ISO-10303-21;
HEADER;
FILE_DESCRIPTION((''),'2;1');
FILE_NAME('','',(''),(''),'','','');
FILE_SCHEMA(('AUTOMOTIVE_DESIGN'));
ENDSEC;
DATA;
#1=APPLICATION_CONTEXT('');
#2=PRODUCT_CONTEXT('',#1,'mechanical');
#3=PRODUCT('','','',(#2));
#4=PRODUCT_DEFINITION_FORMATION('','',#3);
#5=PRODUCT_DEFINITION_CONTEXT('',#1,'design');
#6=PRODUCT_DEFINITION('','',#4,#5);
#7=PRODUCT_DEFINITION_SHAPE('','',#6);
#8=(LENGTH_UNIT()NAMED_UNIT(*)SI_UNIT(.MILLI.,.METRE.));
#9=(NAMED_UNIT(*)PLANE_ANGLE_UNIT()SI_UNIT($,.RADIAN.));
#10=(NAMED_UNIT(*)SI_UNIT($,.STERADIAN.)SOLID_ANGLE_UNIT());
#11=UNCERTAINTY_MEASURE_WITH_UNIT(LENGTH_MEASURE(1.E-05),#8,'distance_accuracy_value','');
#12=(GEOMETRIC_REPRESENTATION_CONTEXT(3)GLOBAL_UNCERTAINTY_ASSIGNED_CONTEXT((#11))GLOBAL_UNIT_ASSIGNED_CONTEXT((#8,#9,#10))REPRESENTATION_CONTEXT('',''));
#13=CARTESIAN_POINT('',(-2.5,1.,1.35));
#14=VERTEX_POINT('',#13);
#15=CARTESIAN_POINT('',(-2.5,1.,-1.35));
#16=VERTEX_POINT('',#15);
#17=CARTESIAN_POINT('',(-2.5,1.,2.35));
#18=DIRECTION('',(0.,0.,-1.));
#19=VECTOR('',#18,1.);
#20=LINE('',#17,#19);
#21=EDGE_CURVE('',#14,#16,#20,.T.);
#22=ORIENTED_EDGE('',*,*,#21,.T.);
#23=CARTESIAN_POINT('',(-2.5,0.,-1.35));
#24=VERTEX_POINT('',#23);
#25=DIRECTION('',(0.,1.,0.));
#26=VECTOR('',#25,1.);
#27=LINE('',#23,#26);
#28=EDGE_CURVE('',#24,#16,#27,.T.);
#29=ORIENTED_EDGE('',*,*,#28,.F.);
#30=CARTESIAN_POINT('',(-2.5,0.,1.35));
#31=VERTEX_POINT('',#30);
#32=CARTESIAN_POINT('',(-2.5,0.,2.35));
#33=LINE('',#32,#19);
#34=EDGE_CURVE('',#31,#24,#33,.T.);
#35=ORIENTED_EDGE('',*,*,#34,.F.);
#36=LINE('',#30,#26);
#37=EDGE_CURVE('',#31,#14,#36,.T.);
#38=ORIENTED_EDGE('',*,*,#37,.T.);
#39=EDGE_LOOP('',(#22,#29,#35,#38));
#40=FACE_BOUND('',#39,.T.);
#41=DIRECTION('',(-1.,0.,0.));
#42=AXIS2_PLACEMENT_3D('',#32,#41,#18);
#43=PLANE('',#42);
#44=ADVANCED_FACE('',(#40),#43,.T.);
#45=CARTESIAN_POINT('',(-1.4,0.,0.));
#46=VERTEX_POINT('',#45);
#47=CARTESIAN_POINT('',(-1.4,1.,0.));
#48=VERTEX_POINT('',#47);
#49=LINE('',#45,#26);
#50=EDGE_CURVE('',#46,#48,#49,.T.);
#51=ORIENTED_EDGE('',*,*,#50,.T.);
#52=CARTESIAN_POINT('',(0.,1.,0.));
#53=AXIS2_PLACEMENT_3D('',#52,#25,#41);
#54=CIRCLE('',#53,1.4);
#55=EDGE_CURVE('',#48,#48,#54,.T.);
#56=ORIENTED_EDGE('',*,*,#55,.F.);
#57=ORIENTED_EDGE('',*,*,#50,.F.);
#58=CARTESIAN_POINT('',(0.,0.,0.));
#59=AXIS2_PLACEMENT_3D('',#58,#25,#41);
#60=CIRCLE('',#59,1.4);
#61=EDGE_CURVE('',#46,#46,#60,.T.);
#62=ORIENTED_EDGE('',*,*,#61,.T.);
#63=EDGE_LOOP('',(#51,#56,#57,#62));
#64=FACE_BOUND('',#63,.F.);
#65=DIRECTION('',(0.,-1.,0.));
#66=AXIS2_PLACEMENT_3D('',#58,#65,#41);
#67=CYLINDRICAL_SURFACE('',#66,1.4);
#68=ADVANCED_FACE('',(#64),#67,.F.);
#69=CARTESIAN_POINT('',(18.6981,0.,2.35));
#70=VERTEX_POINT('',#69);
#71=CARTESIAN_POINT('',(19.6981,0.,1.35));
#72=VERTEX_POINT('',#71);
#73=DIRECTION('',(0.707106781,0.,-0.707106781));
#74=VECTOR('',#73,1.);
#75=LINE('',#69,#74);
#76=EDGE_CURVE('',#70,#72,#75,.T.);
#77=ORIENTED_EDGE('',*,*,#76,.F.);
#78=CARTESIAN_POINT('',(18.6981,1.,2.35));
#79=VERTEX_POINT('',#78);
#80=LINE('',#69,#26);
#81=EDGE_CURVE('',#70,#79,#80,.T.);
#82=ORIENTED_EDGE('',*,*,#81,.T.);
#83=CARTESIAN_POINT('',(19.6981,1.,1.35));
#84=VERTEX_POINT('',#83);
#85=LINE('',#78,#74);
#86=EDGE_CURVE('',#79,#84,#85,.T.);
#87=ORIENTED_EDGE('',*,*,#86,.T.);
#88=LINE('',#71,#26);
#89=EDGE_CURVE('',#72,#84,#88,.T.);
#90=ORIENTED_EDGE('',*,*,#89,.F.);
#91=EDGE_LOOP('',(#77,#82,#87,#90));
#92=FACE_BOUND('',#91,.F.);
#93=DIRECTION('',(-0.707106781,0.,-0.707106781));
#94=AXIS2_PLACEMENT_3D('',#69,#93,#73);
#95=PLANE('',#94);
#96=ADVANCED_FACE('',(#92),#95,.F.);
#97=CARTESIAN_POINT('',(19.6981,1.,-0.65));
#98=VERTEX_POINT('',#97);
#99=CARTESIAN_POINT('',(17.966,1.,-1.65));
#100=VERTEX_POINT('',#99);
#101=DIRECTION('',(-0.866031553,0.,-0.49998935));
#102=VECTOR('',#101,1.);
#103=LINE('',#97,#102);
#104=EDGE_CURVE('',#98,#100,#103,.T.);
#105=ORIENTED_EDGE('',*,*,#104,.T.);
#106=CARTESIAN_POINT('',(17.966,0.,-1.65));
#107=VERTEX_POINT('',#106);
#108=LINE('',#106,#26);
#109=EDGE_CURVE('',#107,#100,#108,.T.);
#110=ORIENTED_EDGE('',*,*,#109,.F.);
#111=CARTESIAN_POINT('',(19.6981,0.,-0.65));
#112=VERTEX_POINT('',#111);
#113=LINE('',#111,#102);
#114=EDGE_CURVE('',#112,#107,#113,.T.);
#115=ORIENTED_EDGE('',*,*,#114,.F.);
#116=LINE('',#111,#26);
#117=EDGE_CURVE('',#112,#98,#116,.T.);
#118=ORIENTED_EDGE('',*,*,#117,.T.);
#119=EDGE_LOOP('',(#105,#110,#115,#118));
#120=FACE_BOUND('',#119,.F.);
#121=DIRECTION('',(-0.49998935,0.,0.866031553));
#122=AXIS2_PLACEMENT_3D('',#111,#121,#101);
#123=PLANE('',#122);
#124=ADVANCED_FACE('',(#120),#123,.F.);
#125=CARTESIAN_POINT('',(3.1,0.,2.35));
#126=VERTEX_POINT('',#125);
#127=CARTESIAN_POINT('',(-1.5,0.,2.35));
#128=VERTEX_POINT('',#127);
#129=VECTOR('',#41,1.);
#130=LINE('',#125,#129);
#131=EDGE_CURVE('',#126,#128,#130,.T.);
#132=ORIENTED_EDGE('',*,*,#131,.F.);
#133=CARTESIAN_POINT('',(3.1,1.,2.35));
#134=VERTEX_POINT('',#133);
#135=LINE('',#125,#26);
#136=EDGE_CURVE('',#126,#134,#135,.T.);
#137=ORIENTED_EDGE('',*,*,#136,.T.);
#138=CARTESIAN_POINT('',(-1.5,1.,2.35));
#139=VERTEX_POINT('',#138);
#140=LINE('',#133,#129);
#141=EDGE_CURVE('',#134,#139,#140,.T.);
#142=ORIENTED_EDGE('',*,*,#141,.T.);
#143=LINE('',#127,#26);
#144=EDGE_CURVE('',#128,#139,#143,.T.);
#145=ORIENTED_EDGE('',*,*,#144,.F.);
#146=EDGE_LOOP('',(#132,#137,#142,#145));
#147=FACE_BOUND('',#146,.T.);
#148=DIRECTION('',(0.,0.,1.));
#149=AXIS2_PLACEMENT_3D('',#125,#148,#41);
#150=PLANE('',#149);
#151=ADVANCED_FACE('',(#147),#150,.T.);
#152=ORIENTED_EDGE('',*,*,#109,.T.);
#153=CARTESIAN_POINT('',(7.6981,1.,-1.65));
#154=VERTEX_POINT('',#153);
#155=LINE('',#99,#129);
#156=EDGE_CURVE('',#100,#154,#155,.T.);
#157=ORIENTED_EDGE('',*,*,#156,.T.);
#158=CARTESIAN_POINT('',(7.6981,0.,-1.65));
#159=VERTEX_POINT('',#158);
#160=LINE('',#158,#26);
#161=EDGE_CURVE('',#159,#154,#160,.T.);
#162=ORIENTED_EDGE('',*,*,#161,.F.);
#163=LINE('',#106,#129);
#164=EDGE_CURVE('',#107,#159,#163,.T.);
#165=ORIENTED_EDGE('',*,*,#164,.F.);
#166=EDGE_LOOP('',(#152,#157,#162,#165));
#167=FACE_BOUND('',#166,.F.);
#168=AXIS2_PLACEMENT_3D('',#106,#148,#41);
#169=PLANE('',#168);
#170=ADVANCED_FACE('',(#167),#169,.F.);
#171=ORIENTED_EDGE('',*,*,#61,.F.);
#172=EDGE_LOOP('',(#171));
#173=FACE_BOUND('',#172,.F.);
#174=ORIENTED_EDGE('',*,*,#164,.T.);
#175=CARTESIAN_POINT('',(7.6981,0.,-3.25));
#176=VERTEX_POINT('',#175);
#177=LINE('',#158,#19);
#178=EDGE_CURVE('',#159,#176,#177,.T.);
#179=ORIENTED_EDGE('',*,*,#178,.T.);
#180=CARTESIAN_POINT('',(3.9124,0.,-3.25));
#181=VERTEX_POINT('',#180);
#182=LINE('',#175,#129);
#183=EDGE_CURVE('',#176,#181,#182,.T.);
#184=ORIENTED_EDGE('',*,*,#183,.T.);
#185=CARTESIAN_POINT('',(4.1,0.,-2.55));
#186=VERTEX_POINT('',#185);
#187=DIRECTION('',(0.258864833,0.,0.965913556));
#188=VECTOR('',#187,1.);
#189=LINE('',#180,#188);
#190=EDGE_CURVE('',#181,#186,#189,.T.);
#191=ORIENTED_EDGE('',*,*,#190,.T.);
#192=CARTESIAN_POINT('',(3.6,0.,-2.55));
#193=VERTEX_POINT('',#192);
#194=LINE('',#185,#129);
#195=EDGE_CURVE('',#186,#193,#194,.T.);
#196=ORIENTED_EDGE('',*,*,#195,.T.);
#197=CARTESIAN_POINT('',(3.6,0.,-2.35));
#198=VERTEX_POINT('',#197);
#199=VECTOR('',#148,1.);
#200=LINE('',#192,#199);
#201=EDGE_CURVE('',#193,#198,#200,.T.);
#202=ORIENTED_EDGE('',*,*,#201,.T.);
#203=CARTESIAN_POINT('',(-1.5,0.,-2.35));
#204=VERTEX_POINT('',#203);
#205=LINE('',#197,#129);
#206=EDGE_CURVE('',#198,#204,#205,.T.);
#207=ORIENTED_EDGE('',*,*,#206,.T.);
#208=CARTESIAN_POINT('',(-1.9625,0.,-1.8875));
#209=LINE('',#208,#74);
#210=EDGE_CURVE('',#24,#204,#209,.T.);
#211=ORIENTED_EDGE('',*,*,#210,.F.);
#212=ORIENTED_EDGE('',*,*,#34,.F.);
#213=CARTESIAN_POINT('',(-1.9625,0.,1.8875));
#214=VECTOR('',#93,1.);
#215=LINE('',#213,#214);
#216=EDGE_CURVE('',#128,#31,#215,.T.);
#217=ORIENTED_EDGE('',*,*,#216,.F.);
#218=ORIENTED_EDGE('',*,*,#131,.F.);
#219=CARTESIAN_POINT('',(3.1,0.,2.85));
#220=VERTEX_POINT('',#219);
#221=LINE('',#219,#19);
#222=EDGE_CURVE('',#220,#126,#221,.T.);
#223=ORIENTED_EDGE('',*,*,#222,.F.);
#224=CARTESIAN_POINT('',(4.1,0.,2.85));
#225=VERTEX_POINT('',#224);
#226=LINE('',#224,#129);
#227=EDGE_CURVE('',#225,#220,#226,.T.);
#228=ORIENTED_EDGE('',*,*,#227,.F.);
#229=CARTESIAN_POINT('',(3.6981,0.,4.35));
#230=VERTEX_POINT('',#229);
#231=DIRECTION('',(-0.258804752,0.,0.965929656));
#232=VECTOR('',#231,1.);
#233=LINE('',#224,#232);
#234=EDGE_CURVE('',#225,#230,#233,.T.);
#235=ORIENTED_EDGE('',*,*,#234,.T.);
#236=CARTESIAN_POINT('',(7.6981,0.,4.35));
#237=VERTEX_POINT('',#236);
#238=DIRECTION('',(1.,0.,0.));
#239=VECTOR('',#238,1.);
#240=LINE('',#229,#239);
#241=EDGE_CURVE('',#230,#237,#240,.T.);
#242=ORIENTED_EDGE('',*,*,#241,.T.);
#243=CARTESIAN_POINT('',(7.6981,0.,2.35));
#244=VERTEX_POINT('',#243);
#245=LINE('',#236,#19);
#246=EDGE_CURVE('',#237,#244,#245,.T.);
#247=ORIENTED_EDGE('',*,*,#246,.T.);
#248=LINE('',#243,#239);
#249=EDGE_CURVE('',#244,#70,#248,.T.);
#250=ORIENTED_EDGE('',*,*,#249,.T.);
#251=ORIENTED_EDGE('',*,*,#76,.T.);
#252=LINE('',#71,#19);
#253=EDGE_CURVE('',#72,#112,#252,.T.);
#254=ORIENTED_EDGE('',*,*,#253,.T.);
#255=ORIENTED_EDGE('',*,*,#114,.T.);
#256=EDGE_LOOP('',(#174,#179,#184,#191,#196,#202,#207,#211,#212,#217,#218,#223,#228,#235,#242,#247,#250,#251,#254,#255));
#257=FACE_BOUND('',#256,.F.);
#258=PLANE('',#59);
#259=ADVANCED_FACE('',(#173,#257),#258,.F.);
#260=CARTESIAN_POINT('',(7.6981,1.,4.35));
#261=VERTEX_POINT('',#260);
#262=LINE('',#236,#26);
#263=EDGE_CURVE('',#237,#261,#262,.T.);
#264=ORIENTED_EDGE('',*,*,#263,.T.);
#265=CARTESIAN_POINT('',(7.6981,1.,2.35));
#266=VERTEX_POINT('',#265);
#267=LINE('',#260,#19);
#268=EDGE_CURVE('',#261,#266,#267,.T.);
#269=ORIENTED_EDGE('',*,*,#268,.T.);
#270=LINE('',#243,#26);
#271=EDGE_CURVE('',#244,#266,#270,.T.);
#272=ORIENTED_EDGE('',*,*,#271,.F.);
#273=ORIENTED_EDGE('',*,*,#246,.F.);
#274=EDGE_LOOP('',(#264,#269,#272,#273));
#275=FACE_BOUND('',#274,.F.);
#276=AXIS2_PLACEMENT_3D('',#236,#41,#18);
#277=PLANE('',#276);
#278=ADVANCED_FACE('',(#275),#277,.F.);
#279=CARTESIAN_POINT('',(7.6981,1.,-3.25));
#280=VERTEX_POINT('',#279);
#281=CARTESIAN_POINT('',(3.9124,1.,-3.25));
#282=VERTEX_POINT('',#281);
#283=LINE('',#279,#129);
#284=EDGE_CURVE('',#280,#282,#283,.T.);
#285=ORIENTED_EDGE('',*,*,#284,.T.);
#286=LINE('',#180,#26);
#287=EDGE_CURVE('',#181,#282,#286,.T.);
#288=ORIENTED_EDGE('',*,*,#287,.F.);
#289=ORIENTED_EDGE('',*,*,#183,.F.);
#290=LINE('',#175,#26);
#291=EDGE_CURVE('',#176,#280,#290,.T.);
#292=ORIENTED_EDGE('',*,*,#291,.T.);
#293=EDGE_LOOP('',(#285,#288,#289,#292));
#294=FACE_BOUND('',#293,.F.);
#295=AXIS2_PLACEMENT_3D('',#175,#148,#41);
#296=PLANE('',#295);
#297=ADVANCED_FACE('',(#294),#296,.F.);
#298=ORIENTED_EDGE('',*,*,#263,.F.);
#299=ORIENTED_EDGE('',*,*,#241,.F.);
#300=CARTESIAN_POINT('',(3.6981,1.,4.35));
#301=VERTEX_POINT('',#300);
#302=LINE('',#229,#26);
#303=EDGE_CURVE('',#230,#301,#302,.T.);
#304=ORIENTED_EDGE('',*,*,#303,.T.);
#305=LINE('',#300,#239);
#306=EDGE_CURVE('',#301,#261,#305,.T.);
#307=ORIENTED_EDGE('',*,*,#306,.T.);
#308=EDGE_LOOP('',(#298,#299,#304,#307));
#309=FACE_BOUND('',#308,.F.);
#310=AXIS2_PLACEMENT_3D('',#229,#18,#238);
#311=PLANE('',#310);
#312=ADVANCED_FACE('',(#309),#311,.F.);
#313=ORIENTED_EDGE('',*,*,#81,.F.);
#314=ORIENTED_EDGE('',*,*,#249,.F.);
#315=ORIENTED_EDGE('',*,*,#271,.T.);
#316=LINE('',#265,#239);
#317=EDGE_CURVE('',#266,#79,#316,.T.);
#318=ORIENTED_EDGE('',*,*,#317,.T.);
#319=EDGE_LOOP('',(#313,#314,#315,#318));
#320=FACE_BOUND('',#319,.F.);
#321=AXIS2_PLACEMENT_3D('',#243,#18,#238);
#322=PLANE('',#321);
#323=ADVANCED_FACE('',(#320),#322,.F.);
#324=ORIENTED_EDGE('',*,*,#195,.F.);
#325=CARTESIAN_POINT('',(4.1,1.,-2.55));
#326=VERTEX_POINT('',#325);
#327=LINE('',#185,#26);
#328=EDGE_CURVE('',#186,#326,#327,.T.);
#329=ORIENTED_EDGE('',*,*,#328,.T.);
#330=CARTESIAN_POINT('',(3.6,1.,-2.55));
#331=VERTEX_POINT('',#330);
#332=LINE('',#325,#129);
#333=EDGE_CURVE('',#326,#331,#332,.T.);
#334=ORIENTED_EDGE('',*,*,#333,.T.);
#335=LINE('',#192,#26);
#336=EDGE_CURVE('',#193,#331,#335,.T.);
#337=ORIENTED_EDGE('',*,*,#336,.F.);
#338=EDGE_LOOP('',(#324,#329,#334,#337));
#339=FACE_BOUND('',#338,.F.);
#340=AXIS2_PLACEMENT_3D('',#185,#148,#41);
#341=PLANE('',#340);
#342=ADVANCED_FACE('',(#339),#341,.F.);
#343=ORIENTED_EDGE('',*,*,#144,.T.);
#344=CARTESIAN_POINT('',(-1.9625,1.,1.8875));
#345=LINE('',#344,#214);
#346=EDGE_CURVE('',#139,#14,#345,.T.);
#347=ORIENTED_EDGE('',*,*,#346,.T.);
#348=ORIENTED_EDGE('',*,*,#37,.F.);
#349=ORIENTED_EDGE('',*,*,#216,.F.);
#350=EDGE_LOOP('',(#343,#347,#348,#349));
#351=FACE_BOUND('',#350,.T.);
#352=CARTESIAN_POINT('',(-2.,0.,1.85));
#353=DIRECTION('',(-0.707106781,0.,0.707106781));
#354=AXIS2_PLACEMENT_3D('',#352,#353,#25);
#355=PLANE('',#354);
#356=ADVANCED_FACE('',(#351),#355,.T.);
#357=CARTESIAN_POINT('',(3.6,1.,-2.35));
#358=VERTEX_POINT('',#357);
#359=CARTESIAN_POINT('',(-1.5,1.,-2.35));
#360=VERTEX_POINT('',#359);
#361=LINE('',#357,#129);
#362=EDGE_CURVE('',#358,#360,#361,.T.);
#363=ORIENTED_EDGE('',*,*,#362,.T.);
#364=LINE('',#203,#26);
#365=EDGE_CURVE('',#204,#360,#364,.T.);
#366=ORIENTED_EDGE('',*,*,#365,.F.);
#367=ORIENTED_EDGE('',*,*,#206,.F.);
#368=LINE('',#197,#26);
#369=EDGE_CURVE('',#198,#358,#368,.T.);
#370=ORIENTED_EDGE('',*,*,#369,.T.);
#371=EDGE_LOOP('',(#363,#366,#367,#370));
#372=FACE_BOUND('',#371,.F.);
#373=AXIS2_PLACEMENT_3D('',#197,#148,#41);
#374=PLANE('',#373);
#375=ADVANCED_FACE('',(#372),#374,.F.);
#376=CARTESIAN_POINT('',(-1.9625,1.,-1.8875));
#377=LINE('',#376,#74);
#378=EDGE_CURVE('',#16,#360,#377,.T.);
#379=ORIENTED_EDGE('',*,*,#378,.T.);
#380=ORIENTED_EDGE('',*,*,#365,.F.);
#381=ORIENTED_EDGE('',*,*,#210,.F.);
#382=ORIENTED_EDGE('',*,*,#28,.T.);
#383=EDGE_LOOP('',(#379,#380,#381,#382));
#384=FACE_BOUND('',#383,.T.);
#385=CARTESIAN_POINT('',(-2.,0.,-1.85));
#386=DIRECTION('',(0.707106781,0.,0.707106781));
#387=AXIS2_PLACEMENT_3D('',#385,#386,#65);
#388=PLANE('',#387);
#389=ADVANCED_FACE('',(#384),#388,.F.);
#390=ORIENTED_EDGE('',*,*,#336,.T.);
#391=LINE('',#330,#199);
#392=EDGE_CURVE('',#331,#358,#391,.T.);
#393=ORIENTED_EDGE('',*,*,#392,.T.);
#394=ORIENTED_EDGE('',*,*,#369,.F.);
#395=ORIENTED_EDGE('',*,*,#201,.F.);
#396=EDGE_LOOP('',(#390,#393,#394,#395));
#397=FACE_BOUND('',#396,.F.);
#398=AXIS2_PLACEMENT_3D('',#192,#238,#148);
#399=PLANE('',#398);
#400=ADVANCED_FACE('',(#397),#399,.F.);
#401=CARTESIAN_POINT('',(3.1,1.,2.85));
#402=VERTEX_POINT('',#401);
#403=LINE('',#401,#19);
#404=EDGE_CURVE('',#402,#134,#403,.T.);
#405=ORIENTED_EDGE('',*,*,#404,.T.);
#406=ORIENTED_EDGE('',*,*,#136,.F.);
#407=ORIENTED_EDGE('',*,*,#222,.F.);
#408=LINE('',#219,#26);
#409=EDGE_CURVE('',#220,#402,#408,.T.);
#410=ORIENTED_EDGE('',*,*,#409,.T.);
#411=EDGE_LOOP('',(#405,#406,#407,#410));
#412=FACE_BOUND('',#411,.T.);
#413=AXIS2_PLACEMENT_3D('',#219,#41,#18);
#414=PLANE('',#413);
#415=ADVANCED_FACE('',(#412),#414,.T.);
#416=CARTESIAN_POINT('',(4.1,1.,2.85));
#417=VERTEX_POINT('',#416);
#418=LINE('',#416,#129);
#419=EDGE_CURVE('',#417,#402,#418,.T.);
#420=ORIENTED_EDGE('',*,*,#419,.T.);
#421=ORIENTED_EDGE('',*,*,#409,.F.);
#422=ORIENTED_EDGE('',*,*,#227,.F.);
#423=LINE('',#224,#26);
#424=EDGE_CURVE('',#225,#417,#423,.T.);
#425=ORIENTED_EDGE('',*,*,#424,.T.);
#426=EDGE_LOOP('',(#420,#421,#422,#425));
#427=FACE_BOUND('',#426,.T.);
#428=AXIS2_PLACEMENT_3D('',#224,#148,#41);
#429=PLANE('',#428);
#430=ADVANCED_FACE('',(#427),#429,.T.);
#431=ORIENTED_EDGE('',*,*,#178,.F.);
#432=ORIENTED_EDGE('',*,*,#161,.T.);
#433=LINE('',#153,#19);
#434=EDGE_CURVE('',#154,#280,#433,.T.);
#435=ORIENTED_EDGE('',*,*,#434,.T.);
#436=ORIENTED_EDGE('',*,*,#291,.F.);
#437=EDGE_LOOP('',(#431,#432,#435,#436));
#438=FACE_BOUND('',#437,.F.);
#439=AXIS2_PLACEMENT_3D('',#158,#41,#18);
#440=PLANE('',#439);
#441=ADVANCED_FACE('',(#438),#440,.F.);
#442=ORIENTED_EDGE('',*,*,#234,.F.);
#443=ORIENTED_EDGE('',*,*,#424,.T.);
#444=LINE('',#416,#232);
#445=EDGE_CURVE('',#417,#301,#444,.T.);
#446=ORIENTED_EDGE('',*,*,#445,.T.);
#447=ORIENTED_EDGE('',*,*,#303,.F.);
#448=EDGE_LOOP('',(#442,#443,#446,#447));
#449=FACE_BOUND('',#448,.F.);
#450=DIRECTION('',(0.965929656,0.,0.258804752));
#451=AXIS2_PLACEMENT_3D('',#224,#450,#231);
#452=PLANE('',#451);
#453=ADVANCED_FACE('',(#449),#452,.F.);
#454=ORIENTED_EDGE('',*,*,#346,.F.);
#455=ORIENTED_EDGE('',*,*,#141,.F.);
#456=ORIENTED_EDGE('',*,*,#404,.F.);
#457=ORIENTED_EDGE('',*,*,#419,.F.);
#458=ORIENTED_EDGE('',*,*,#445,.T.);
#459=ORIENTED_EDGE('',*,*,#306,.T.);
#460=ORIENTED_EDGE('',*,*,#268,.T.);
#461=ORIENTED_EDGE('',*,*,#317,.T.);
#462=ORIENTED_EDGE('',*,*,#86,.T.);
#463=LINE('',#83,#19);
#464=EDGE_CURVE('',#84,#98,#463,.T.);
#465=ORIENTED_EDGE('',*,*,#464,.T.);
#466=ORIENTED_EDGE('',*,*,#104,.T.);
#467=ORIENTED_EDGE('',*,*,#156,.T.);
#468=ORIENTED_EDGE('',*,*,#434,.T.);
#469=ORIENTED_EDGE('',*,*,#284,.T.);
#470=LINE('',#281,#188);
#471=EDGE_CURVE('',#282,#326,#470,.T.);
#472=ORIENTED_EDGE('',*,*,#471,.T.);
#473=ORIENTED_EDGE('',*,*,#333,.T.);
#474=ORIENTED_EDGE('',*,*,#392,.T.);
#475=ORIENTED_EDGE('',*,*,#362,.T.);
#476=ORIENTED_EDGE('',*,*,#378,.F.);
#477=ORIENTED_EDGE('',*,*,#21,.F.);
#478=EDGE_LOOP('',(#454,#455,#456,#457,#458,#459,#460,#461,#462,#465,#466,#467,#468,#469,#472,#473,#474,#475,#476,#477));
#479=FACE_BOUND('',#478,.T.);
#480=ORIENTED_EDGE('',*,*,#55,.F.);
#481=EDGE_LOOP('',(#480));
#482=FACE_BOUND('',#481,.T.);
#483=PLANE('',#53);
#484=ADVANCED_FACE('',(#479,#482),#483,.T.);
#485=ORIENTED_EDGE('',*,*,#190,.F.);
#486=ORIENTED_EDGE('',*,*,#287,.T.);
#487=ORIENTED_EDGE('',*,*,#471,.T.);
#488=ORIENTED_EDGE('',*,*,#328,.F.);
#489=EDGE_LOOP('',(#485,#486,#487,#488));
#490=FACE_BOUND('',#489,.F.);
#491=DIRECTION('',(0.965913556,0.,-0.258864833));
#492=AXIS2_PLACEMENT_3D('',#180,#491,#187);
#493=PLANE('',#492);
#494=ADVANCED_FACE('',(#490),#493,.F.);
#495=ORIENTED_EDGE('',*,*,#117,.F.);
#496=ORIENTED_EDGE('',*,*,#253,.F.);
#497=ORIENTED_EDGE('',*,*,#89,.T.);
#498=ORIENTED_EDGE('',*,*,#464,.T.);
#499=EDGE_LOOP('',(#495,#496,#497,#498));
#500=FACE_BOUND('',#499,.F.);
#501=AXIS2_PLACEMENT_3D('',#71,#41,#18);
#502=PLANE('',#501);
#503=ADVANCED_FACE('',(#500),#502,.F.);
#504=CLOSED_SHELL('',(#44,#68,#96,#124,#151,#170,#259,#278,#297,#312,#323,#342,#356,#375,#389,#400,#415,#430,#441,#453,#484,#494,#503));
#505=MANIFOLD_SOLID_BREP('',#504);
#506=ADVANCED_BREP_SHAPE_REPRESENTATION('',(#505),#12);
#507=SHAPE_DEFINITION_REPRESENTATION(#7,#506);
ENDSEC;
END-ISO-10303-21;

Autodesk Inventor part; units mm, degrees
ref_plane "YZ Plane" through (0, 0, 0) normal (1, 0, 0) x (0, 1, 0)
ref_plane "XZ Plane" through (0, 0, 0) normal (0, 1, 0) x (-1, 0, 0)
ref_plane "XY Plane" through (0, 0, 0) normal (0, 0, 1) x (1, 0, 0)
sketch "Sketch1" plane through (0, 0, 0) normal (0, 1, 0) x (-1, 0, 0)
  line L0 (-4.1, 2.85) -> (-3.1, 2.85)
  line L1 (-3.1, 2.85) -> (-3.1, 2.35)
  line L2 (-3.1, 2.35) -> (2.5, 2.35)
  line L3 (2.5, 2.35) -> (2.5, -2.35)
  line L4 (-4.1, 2.85) -> (-3.6981, 4.35)
  line L5 (-3.6981, 4.35) -> (-7.6981, 4.35)
  line L6 (-7.6981, 4.35) -> (-7.6981, 2.35)
  line L7 (-7.6981, 2.35) -> (-18.6981, 2.35)
  line L8 (-18.6981, 2.35) -> (-19.6981, 1.35)
  line L9 (-19.6981, 1.35) -> (-19.6981, -0.65)
  line L10 (-19.6981, -0.65) -> (-17.966, -1.65)
  line L11 (-17.966, -1.65) -> (-7.6981, -1.65)
  line L12 (-7.6981, -1.65) -> (-7.6981, -3.25)
  line L13 (-7.6981, -3.25) -> (-3.9124, -3.25)
  line L14 (-3.9124, -3.25) -> (-4.1, -2.55)
  line L15 (-4.1, -2.55) -> (-3.6, -2.55)
  line L16 (-3.6, -2.55) -> (-3.6, -2.35)
  line L17 (-3.6, -2.35) -> (2.5, -2.35)
  circle A0 centre (0, 0) radius 1.4
  dimension "d1" = 4
  dimension "d2" = 2
  dimension "d3" = 75
  dimension "d4" = 4.7
  dimension "d5" = 5.6
  dimension "d6" = 1
  dimension "d7" = 0.5
  dimension "d8" = 75
  dimension "d9" = 7.6
  dimension "d10" = 2
  dimension "d11" = 0.5
  dimension "d12" = 0.2
  dimension "d13" = 2.8
  dimension "d14" = 2.5
  dimension "d15" = 2.35
  dimension "d17" = 0
  dimension "d18" = 0
  dimension "d19" = 4
  dimension "d20" = 0
  dimension "d21" = 0
  dimension "d23" = 2
  dimension "d24" = 60
  dimension "d25" = 45
  dimension "d26" = 12
  dimension "d27" = 1
extrude "Plate1" add sketch "Sketch1" along normal blind 1
chamfer "Corner Chamfer1" distance 1 angle 45 2 edges at (-2.5, 0.5, 2.35) (-2.5, 0.5, -2.35)
sketch "Sketch2" plane through (0, 1, 0) normal (0, 1, 0) x (1, 0, 0)
  circle A0 centre (0, 0) radius 1.4 projected
equation "\"d8\" = d3"
equation "\"d15\" = 0.5 * d4"
equation "\"d31\" = Thickness"
equation "\"BendRadius\" = Thickness"
equation "\"BendReliefWidth\" = Thickness"
equation "\"BendReliefDepth\" = 0.5 * Thickness"
equation "\"CornerReliefSize\" = 4 * Thickness"
equation "\"MinimumRemnant\" = 2 * Thickness"
equation "\"TransitionRadius\" = BendRadius"
equation "\"JacobiRadiusSize\" = BendRadius"
equation "\"GapSize\" = Thickness"
equation "\"d16\" = BendRadius"
equation "\"Thickness\" = 1"
properties part number "PlacaFasePlug" material "Steel, Galvanized"
